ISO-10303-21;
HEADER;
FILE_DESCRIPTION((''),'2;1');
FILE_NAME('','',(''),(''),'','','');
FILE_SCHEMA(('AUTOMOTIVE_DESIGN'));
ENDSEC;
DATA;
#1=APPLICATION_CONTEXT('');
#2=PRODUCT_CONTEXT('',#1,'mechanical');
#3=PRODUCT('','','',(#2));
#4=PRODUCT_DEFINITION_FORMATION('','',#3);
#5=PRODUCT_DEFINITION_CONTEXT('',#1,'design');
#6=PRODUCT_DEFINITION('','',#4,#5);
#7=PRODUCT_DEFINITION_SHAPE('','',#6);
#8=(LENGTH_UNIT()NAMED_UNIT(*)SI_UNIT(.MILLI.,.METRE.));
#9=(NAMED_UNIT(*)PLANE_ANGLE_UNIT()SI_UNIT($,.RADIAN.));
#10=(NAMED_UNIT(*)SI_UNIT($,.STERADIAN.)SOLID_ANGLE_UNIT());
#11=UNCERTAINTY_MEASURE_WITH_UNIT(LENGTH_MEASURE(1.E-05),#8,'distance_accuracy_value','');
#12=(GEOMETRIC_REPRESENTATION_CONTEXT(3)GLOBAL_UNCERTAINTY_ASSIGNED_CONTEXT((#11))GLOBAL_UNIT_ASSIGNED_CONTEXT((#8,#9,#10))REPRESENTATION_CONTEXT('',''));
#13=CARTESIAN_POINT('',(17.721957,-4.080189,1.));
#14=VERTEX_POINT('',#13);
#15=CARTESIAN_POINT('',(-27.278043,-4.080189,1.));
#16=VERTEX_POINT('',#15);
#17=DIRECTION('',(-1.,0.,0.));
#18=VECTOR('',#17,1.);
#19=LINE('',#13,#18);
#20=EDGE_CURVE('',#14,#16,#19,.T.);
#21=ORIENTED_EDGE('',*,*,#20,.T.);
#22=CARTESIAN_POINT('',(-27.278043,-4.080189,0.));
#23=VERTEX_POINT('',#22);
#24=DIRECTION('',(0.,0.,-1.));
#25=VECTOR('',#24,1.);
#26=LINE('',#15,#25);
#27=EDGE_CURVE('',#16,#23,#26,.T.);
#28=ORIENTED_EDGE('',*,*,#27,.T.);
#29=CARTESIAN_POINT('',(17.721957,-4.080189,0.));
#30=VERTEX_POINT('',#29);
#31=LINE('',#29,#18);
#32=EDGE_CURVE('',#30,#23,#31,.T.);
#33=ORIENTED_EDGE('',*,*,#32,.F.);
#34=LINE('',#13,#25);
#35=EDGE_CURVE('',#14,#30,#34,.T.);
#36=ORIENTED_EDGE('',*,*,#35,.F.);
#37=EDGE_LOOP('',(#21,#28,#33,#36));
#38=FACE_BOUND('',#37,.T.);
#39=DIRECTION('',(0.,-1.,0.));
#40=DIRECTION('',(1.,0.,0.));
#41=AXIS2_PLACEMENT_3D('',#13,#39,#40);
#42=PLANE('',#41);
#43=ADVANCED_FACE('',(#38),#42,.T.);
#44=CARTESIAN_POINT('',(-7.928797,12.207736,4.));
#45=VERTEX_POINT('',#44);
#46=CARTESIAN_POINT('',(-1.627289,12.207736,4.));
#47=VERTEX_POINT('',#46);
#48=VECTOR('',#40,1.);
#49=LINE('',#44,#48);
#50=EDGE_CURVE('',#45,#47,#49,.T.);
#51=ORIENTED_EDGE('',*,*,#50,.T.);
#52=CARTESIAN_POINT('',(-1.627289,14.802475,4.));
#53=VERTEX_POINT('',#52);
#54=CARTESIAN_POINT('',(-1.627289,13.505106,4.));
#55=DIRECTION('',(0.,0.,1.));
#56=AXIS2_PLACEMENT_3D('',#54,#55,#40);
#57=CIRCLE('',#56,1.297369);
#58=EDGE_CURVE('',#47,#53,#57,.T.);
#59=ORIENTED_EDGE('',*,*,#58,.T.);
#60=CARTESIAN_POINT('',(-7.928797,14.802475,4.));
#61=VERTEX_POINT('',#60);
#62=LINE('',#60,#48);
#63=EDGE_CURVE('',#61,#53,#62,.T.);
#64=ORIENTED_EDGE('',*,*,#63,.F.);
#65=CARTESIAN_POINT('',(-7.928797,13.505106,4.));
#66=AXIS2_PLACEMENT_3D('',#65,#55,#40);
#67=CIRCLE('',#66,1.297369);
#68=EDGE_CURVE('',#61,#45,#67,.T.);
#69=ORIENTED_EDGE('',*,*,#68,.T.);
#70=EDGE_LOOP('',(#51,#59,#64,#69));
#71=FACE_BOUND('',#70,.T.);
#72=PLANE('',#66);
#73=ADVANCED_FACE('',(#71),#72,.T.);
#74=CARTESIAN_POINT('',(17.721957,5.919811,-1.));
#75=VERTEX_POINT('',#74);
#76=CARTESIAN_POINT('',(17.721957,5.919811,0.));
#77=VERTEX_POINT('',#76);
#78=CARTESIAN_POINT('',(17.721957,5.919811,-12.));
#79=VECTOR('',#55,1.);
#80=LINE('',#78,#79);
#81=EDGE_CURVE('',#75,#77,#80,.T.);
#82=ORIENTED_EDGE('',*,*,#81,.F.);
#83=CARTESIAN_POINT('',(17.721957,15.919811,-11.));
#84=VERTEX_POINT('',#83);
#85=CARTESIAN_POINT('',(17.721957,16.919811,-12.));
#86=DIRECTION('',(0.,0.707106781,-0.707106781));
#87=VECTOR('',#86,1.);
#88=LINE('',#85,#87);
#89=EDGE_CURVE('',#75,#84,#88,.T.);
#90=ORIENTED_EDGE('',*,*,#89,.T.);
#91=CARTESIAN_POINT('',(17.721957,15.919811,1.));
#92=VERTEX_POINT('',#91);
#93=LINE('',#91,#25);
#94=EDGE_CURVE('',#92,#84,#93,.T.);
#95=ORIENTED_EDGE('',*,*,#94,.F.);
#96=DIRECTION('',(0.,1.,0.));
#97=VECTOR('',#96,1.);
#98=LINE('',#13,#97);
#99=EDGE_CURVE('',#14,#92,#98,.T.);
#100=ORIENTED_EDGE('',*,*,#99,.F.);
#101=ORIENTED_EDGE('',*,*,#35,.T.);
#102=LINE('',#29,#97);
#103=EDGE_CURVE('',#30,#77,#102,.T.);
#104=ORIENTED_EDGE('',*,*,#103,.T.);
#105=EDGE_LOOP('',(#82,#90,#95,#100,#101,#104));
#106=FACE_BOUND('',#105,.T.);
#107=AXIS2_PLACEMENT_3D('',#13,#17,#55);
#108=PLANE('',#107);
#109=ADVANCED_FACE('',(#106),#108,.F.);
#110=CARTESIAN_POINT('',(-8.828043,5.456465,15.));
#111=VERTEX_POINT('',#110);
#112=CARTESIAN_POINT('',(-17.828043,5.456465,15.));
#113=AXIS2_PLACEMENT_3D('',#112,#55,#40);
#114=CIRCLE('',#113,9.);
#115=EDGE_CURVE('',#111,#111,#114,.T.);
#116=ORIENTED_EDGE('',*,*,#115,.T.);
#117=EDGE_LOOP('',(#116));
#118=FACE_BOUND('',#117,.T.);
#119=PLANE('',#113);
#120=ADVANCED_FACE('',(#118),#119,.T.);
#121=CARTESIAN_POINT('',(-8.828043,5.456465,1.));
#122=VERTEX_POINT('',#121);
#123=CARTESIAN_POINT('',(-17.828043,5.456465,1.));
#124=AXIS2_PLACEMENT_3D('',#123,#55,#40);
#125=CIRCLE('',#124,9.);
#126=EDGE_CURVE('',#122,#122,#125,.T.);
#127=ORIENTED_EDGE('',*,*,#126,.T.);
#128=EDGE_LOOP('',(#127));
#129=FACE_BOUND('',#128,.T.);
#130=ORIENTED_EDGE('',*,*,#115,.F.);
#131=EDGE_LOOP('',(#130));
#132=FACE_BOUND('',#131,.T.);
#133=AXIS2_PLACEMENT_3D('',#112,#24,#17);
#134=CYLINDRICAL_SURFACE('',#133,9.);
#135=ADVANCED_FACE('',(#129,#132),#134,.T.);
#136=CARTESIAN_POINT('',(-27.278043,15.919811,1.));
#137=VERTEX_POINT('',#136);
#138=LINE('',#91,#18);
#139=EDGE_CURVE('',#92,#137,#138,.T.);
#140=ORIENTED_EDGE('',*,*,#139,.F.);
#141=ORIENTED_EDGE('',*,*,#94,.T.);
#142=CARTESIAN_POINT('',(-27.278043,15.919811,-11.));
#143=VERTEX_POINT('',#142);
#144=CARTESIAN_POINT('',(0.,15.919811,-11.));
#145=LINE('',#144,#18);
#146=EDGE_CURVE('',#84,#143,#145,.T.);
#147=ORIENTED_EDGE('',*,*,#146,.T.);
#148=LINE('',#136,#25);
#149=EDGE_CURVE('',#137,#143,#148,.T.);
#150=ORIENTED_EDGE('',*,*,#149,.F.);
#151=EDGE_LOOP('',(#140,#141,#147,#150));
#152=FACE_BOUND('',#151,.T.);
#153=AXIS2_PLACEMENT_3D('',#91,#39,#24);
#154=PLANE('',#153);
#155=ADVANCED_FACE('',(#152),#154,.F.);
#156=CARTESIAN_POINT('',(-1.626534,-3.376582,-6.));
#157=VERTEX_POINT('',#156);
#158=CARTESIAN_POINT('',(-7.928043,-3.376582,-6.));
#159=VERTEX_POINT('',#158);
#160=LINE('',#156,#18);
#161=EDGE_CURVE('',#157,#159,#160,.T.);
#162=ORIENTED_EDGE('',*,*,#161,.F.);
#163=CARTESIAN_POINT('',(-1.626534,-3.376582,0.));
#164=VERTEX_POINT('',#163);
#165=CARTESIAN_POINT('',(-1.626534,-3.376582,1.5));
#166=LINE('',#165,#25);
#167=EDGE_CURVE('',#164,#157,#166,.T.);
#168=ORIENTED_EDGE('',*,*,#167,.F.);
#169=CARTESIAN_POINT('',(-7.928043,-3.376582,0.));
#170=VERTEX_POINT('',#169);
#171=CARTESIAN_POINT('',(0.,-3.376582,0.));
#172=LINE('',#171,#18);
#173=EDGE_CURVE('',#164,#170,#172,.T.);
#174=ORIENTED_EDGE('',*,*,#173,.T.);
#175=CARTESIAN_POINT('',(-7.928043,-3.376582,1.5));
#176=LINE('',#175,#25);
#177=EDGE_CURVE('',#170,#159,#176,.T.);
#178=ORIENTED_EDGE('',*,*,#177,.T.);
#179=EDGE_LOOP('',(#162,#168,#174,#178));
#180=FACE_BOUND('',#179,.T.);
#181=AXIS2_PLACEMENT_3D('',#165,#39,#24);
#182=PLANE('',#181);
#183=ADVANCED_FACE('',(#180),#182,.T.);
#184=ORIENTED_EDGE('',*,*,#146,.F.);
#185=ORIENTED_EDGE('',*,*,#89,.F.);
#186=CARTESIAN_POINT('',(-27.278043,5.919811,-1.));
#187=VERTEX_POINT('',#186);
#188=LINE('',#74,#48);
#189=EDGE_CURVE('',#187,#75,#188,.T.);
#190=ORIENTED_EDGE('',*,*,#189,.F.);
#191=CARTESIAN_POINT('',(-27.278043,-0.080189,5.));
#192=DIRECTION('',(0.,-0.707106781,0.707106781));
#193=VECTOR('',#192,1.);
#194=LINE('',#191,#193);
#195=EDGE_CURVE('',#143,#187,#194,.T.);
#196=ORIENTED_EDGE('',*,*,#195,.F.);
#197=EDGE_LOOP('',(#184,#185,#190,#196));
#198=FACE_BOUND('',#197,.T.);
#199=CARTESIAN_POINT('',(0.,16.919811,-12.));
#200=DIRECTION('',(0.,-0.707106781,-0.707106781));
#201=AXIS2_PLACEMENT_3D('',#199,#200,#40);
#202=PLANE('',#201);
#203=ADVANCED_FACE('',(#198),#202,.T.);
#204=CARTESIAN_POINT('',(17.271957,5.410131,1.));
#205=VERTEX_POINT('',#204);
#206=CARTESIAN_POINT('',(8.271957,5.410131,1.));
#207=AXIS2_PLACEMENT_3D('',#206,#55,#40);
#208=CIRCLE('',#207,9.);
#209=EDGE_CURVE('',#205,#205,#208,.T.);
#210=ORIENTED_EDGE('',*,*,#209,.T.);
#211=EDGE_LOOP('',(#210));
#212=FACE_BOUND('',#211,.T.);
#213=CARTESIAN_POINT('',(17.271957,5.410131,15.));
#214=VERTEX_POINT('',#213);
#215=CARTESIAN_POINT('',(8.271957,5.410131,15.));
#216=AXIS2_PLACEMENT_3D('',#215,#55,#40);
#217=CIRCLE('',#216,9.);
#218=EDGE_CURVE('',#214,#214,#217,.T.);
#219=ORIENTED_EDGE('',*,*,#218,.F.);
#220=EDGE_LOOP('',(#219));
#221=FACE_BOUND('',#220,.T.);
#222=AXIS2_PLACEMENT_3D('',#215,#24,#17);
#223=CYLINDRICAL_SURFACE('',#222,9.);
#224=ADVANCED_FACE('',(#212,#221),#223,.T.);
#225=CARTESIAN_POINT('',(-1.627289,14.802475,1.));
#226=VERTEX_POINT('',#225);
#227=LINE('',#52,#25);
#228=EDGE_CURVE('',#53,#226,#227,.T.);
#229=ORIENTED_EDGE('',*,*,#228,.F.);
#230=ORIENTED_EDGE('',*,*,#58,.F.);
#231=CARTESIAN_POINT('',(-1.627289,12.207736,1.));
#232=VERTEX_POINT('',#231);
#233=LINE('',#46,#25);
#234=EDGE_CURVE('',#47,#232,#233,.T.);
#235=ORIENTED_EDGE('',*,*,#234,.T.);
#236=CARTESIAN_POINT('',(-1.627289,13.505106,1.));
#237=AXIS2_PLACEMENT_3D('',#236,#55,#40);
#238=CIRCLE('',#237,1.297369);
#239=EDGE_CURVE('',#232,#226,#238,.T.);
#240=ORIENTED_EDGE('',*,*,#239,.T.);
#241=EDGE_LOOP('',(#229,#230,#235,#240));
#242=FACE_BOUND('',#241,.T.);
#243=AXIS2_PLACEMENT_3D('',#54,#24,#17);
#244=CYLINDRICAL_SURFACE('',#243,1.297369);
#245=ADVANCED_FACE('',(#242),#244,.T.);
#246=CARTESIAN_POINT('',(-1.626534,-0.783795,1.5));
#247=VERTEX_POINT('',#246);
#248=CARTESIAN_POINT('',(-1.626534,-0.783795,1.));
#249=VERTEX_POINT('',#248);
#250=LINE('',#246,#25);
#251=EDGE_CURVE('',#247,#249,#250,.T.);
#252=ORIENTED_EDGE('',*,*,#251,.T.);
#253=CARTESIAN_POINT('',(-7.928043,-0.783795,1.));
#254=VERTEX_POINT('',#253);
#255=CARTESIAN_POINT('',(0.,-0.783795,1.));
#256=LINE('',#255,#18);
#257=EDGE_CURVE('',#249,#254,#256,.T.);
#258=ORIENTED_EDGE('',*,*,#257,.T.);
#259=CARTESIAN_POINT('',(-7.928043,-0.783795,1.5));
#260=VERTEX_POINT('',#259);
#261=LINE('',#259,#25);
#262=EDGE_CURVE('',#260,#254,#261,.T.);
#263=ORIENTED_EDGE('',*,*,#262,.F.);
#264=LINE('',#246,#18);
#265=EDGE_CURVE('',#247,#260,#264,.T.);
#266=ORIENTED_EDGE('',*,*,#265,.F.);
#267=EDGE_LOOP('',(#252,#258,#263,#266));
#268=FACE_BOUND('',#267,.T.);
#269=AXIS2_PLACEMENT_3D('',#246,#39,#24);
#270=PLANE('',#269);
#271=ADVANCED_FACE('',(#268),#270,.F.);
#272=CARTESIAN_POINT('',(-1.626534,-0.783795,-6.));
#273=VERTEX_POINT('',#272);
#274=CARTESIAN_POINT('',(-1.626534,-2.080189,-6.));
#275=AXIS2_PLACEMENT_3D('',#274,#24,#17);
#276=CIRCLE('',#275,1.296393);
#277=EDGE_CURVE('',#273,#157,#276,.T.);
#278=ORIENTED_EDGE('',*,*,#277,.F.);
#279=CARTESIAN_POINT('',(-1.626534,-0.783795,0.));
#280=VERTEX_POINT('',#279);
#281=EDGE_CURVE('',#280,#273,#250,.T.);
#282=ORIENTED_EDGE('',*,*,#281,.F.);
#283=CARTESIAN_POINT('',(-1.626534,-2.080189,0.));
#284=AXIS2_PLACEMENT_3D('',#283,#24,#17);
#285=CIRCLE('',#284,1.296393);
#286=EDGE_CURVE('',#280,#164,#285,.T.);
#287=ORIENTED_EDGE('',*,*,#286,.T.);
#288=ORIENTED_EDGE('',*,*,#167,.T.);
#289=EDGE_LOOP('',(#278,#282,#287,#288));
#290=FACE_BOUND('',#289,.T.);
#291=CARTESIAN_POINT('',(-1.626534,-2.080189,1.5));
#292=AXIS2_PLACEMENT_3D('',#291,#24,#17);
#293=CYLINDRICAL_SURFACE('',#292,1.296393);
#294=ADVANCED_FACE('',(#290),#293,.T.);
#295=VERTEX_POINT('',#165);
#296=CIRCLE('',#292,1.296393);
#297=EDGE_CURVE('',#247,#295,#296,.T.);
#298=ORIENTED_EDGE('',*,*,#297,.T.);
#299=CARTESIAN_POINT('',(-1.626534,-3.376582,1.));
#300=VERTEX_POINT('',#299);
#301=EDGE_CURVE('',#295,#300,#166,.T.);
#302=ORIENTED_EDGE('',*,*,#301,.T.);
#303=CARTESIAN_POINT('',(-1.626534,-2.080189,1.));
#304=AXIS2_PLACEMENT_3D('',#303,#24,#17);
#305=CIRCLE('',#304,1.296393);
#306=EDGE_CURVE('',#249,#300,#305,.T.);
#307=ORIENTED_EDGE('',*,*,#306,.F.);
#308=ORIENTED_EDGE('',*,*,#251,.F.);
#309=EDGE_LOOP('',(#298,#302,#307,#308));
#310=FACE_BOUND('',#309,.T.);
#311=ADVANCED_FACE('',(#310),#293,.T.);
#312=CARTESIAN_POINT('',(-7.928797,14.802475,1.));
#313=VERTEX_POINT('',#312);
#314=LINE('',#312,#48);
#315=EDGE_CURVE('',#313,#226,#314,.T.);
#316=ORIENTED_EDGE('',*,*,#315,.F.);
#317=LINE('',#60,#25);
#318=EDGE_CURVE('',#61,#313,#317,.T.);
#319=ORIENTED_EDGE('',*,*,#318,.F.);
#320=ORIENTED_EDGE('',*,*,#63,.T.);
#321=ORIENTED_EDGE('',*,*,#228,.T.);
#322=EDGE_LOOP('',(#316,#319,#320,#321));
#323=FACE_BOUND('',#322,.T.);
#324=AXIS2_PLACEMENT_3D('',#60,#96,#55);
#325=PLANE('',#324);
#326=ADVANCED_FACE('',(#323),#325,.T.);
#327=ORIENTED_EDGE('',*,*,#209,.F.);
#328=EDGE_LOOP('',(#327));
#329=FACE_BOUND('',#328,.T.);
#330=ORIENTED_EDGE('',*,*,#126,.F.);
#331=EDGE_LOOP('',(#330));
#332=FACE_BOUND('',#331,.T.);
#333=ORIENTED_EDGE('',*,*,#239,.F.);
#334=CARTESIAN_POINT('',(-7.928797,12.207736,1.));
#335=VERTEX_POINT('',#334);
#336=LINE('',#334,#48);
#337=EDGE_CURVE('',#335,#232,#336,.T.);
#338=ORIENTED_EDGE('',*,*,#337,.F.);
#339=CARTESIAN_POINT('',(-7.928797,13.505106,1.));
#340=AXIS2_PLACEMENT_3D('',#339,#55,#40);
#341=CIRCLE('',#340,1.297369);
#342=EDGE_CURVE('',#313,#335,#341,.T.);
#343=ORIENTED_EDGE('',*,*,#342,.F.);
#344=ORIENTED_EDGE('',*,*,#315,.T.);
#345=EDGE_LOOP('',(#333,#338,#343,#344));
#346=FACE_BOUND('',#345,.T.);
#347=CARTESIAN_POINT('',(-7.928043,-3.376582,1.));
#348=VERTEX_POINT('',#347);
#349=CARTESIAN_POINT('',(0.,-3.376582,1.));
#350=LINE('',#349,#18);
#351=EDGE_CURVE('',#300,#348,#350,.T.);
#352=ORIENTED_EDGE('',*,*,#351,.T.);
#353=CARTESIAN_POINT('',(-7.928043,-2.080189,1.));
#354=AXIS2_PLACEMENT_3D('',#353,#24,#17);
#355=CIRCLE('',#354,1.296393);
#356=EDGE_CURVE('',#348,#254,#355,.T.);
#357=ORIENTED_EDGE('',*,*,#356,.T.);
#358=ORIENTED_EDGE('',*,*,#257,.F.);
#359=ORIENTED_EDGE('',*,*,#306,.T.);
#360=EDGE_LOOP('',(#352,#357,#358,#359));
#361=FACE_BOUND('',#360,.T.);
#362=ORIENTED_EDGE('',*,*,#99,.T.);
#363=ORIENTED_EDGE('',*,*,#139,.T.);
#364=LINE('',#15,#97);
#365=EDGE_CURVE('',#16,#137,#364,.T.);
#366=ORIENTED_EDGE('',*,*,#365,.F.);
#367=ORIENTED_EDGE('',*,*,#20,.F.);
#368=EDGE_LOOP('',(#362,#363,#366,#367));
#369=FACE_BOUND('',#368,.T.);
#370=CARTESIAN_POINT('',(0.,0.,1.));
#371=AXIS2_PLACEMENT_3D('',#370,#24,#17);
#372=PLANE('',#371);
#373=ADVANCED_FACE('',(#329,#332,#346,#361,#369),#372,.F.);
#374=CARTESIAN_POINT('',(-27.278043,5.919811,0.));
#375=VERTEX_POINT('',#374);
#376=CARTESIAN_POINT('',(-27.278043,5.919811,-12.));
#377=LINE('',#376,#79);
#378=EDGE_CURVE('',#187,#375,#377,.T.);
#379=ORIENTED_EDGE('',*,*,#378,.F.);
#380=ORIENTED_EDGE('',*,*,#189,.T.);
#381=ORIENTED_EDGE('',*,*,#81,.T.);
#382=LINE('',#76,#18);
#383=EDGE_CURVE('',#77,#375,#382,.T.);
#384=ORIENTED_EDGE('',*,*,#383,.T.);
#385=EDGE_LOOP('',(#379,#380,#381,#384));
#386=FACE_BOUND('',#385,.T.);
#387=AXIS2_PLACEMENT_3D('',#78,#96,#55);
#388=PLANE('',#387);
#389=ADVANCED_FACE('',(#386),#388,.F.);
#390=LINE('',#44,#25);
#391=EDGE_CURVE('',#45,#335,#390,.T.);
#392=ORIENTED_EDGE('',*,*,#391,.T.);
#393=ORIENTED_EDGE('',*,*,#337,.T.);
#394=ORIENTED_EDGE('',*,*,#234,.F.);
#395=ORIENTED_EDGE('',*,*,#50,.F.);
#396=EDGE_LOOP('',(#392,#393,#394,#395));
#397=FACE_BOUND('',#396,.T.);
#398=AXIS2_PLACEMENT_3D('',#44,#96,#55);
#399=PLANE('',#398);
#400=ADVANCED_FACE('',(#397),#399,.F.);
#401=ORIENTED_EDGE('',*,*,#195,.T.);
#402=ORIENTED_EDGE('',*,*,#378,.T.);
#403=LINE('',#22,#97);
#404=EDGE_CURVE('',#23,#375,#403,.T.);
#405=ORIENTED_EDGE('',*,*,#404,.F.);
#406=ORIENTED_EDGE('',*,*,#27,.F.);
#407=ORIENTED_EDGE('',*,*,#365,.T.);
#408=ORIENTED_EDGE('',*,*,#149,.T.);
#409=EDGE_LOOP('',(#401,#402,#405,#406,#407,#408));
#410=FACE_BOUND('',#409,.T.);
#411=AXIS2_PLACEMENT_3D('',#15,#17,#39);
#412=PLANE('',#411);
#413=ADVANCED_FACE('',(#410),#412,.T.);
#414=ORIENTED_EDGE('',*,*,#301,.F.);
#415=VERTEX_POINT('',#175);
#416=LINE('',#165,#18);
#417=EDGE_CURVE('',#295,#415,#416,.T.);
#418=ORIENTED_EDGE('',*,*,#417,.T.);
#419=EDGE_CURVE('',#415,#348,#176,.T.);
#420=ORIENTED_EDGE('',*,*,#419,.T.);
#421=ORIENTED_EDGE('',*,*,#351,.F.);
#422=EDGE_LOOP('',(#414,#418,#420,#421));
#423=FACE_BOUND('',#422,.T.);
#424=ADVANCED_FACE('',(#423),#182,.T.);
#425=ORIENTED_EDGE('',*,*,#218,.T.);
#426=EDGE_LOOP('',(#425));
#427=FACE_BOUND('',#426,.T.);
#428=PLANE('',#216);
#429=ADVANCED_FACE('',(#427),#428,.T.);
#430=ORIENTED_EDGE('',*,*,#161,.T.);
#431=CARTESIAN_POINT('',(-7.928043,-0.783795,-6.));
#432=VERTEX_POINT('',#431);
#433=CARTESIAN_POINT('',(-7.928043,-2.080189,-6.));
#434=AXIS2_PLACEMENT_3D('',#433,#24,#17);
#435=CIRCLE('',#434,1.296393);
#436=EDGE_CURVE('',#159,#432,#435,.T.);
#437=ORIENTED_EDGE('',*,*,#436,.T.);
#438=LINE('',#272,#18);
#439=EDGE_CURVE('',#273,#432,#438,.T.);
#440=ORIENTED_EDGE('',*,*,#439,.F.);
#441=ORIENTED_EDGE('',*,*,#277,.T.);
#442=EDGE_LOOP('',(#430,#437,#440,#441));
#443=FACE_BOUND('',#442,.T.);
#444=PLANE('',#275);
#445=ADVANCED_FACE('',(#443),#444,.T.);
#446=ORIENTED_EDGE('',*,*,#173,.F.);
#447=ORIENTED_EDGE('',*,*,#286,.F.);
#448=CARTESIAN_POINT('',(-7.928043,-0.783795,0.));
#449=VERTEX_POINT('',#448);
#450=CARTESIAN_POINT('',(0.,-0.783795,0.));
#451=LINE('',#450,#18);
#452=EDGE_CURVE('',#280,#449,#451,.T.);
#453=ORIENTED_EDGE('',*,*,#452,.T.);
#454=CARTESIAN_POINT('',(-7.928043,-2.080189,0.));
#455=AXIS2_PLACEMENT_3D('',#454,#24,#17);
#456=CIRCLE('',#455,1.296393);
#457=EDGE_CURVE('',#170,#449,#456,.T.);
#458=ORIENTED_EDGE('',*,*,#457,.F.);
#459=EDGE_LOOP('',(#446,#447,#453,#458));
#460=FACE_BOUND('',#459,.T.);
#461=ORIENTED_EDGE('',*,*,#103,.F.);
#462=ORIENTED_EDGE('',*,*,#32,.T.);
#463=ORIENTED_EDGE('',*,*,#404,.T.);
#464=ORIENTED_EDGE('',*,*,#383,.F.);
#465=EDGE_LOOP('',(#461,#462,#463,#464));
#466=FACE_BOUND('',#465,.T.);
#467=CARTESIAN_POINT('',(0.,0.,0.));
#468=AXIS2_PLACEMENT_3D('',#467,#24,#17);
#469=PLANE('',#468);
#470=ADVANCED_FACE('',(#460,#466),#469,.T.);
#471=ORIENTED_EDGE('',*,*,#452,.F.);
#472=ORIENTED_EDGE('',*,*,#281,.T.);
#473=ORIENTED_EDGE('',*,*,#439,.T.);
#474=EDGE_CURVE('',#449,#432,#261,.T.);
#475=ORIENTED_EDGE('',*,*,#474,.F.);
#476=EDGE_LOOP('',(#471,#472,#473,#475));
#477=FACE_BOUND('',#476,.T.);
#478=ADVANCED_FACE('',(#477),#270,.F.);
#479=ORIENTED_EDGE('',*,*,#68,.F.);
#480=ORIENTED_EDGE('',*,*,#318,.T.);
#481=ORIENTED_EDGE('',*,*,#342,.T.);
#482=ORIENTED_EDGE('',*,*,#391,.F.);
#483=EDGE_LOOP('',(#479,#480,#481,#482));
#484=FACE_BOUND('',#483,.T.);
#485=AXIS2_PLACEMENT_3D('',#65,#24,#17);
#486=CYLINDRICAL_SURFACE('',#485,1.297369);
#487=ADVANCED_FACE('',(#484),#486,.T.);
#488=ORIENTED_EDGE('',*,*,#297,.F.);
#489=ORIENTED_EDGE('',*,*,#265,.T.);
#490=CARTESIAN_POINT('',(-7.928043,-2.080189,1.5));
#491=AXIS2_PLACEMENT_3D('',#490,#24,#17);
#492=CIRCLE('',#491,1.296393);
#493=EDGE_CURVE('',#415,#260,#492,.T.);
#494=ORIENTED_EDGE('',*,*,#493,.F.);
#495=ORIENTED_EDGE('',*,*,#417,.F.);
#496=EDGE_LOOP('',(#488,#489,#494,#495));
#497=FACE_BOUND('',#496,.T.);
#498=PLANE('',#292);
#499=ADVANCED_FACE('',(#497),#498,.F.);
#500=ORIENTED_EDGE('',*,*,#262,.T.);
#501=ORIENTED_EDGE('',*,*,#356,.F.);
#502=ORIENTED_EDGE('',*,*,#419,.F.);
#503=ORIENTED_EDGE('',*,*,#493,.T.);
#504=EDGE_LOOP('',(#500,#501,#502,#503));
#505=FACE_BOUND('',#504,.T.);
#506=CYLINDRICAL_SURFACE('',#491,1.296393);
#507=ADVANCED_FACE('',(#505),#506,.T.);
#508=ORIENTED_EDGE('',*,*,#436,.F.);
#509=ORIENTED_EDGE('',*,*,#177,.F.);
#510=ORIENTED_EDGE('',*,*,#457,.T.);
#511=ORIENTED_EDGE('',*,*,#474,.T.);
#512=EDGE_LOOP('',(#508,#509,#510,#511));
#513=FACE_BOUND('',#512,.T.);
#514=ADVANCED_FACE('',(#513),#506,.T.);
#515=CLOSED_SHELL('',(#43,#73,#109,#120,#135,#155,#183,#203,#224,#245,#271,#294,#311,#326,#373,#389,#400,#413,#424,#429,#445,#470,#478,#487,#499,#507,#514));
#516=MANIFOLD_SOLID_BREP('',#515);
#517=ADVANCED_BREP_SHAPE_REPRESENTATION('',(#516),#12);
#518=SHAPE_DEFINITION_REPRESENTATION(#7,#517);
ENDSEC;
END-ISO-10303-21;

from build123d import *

# Parameters (mm, degrees)
ESQUISSE1_W             = 45
ESQUISSE1_H             = 20
BOSS_EXTRU_1_DEPTH      = 1
ESQUISSE2_R             = 9
BOSS_EXTRU_3_DEPTH      = 14
BOSS_EXTRU_4_DEPTH      = 3
BOSS_EXTRU_5_DEPTH      = 6
BOSS_EXTRU_5_DEPTH_BACK = 1.5
SKETCH3_W               = 45
SKETCH3_H               = 10
BOSS_EXTRUDE1_DEPTH     = 12
CHAMFER1_SIZE           = 11


with BuildPart() as part:
    # Esquisse1 → Boss.-Extru.1 (new body)
    with BuildSketch(Plane.XY):
        with Locations((-4.778042712, 5.919811321)):
            Rectangle(ESQUISSE1_W, ESQUISSE1_H)
    extrude(amount=BOSS_EXTRU_1_DEPTH)

    # Esquisse2 → Boss.-Extru.3 (add)
    with BuildSketch(Plane.XY.offset(1)):
        with Locations((-17.828042712, 5.456465128)):
            Circle(ESQUISSE2_R)
        with Locations((8.271957288, 5.410130508)):
            Circle(ESQUISSE2_R)
    extrude(amount=BOSS_EXTRU_3_DEPTH)

    # Esquisse3 → Boss.-Extru.4 (add)
    with BuildSketch(Plane.XY.offset(1)):
        with BuildLine():
            Line((-7.928796825, 14.80247516), (-1.627288599, 14.80247516))
            ThreePointArc((-1.627288599, 14.80247516), (-0.329919258, 13.505105819), (-1.627288599, 12.207736479))
            Line((-1.627288599, 12.207736479), (-7.928796825, 12.207736479))
            ThreePointArc((-7.928796825, 12.207736479), (-9.226166166, 13.505105819), (-7.928796825, 14.80247516))
        make_face()
    extrude(amount=BOSS_EXTRU_4_DEPTH)

    # Esquisse4 → Boss.-Extru.5 (add, two sides: drawn at the far end of the back side and taken through both)
    with BuildSketch(Plane(origin=(0.9463019, -1.208788393, 0), x_dir=(-1, 0, 0), z_dir=(0, 0, -1)).offset(-BOSS_EXTRU_5_DEPTH_BACK)):
        with BuildLine():
            Line((2.572836386, 0.424993111), (8.874344612, 0.424993111))
            ThreePointArc((8.874344612, 0.424993111), (10.17073801, -0.871400286), (8.874344612, -2.167793683))
            Line((8.874344612, -2.167793683), (2.572836386, -2.167793683))
            ThreePointArc((2.572836386, -2.167793683), (1.276442989, -0.871400286), (2.572836386, 0.424993111))
        make_face()
    extrude(amount=BOSS_EXTRU_5_DEPTH + BOSS_EXTRU_5_DEPTH_BACK)

    # Sketch3 → Boss-Extrude1 (add)
    with BuildSketch(Plane(origin=(0, 0, 0), x_dir=(-1, 0, 0), z_dir=(0, 0, -1))):
        with Locations((4.778042712, 10.919811321)):
            Rectangle(SKETCH3_W, SKETCH3_H)
    extrude(amount=BOSS_EXTRUDE1_DEPTH)

    # Chamfer1
    # the kernel refuses this chamfer: 11 mm, written as the material it takes off along each edge
    with BuildSketch(Plane(origin=(-55.56655558, 5.919811321, -12), x_dir=(0, 0.9996219169112968, -0.027495876610586417), z_dir=(1, 0, 0))) as chamfer1_piece_1:
        Polygon((CHAMFER1_SIZE * 0.999621916911, CHAMFER1_SIZE * 0.0274958766106), (-CHAMFER1_SIZE * 0.0274958766106, CHAMFER1_SIZE * 0.999621916911), (0, 0), align=None)
    extrude(amount=101.577025735, mode=Mode.SUBTRACT)


solid = part.part
